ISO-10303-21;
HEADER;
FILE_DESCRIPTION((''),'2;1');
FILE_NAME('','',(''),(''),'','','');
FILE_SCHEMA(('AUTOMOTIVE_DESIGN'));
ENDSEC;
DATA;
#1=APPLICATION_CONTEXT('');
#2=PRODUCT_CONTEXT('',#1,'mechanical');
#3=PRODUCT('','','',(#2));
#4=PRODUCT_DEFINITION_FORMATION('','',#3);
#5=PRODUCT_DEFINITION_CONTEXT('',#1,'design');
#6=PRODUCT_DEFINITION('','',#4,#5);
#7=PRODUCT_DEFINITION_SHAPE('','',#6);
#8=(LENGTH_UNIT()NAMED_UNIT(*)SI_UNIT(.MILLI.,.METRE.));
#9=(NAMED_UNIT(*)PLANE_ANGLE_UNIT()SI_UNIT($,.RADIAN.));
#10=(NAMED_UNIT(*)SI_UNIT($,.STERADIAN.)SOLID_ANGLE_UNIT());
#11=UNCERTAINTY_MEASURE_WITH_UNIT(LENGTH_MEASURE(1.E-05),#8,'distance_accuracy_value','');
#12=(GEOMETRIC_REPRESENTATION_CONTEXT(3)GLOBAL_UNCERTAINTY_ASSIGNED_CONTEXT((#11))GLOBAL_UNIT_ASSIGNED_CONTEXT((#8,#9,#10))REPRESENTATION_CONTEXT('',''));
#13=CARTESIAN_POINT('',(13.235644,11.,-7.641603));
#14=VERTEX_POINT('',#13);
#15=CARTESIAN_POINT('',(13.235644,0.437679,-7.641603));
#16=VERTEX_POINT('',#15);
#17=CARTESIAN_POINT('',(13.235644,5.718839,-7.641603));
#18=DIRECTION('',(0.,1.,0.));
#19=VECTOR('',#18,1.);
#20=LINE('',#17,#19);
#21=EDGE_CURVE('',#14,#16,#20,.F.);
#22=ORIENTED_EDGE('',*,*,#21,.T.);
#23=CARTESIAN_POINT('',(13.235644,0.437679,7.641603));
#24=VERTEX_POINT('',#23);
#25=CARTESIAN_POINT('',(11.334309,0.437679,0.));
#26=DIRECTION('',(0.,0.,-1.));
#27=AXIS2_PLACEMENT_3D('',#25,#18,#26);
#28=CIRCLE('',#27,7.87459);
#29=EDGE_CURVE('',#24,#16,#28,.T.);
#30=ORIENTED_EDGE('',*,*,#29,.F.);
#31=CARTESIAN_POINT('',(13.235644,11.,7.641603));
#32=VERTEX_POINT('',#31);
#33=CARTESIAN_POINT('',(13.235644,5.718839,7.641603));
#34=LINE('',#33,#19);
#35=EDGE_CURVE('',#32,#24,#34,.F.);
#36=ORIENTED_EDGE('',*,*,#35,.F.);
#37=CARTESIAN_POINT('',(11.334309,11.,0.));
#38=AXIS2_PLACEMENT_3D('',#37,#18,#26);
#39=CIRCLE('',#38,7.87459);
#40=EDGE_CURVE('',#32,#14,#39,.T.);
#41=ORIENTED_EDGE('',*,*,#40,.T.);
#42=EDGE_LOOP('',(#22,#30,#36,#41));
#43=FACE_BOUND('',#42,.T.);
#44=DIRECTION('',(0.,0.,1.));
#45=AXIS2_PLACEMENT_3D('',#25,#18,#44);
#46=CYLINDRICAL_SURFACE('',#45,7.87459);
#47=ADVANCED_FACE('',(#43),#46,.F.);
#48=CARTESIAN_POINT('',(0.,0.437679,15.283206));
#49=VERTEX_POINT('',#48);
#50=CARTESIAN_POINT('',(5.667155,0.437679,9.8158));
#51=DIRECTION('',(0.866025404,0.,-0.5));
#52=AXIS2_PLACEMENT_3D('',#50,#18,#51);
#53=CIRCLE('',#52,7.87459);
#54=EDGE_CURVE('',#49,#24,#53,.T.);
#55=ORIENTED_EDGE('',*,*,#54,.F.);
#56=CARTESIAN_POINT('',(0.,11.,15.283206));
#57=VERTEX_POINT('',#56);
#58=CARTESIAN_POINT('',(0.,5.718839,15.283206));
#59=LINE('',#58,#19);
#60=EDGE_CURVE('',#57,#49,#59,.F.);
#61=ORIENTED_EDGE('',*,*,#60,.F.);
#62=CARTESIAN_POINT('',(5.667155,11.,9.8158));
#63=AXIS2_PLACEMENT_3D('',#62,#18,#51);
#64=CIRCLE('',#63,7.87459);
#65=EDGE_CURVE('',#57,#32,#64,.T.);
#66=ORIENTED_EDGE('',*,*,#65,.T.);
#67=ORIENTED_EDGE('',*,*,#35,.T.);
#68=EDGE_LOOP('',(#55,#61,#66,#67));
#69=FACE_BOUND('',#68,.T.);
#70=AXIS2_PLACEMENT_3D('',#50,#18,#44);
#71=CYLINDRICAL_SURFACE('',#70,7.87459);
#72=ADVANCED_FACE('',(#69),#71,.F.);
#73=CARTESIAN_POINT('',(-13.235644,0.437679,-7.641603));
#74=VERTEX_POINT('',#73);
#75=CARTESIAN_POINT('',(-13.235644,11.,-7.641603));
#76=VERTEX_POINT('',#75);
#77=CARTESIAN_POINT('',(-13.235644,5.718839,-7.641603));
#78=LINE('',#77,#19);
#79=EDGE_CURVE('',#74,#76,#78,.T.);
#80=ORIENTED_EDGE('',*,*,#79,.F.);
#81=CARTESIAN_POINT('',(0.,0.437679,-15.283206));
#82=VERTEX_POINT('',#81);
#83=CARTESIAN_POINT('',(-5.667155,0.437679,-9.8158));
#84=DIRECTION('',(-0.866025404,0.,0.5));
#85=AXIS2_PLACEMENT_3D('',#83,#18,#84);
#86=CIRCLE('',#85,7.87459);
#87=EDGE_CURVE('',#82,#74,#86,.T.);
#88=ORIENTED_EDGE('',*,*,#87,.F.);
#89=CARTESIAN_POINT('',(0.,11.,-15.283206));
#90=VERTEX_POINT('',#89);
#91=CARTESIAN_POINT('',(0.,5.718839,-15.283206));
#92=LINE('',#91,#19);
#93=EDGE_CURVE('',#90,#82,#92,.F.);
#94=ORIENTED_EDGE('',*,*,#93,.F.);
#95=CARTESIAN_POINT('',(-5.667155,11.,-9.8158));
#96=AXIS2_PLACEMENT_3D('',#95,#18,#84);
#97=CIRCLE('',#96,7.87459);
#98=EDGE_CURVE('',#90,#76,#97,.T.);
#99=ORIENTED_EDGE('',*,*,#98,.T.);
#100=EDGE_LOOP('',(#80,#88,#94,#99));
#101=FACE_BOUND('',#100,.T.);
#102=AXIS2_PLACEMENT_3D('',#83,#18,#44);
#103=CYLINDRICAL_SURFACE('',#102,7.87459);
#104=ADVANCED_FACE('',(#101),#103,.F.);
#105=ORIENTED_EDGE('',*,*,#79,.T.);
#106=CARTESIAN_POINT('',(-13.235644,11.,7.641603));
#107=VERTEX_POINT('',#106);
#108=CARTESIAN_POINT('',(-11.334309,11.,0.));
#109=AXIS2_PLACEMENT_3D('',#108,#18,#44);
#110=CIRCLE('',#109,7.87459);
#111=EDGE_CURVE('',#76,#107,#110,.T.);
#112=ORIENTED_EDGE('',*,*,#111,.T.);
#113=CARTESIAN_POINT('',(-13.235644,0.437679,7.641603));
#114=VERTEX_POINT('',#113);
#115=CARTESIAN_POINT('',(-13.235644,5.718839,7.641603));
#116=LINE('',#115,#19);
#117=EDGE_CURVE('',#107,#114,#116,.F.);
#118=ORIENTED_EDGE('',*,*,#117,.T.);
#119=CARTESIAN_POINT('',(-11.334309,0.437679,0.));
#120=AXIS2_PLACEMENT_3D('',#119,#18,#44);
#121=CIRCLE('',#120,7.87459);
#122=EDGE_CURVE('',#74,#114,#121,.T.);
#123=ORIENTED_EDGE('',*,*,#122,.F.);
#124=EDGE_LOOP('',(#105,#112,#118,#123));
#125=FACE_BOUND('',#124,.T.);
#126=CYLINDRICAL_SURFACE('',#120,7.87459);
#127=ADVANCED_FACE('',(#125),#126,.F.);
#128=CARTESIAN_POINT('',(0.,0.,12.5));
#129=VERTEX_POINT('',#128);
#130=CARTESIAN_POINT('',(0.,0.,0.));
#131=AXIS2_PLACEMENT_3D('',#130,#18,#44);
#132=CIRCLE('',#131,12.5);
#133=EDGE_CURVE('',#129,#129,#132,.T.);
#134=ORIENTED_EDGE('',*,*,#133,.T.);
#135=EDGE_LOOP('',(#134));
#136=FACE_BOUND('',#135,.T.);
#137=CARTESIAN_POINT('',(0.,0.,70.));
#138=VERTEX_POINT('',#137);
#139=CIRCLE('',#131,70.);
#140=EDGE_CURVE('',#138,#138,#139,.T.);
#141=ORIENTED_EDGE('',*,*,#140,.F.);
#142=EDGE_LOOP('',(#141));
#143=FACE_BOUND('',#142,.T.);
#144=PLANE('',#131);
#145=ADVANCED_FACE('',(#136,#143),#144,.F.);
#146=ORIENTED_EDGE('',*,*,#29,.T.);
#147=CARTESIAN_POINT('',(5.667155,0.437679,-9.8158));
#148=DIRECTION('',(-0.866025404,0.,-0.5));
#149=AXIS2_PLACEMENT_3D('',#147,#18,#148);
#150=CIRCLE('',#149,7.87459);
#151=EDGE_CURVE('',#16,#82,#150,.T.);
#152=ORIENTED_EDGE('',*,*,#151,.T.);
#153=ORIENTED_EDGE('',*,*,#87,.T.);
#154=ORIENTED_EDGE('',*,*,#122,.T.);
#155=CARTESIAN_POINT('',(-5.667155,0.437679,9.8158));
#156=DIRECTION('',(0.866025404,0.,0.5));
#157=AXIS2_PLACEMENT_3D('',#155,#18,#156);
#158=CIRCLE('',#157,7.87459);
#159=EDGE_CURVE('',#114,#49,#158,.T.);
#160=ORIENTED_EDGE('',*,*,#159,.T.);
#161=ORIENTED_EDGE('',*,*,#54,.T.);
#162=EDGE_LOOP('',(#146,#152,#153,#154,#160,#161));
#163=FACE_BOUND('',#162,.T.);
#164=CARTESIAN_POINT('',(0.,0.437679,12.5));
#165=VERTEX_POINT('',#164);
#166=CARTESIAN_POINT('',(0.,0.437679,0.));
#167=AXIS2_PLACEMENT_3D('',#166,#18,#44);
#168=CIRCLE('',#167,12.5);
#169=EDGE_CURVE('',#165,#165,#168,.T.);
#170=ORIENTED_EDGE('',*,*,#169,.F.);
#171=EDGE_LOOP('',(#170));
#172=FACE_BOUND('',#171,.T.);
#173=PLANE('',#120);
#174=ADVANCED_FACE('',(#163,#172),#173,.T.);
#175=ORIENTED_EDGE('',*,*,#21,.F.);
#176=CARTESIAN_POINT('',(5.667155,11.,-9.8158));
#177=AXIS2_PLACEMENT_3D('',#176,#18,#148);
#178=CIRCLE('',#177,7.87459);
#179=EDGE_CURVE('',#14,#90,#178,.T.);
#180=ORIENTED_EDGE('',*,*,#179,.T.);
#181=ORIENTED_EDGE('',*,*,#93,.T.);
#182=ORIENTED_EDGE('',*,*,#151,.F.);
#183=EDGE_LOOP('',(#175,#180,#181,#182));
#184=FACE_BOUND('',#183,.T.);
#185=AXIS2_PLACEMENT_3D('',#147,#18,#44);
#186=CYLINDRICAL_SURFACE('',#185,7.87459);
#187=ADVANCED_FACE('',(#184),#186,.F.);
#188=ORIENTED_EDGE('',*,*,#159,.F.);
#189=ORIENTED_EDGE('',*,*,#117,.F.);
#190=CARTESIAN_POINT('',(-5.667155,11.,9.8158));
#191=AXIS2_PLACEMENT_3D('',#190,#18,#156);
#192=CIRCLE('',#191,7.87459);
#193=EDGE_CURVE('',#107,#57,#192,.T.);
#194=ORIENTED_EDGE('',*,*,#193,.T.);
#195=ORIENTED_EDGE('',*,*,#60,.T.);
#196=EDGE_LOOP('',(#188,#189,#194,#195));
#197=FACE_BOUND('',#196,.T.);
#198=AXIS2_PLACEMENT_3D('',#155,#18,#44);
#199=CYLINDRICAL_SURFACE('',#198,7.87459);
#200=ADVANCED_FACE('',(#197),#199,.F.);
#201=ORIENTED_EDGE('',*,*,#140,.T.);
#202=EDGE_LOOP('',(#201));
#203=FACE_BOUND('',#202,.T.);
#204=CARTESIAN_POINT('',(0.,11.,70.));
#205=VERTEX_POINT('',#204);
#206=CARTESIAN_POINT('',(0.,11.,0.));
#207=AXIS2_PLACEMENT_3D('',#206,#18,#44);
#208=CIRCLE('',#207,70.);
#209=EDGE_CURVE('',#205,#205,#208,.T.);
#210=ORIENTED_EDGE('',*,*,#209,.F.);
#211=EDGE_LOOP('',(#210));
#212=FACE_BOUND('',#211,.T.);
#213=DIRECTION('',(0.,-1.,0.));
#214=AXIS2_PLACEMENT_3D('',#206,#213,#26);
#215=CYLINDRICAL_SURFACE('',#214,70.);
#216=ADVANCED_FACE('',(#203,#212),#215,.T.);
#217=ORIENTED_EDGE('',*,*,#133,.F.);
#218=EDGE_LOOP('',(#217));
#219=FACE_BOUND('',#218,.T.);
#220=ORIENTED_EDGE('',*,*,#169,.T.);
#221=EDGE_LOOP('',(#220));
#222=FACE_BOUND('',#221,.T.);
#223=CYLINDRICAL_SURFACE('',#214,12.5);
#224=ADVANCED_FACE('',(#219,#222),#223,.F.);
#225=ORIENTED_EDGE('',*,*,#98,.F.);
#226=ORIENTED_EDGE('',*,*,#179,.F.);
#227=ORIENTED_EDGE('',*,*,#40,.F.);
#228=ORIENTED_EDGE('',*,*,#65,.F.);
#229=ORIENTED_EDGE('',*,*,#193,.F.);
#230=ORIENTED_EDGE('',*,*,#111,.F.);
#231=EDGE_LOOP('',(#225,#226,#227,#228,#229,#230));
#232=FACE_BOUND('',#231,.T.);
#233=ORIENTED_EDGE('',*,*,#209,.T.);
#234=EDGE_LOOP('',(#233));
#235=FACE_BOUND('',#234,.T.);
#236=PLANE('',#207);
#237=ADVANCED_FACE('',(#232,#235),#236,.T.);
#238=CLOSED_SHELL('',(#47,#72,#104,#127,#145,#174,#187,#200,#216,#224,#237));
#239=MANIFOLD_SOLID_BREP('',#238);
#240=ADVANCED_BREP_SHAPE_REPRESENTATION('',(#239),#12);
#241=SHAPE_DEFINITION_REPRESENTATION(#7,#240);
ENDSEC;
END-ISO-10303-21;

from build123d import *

# Parameters (mm, degrees)
SKETCH1_R           = 70
BOSS_EXTRUDE1_DEPTH = 11
SKETCH2_R           = 12.5
CUT_EXTRUDE1_DEPTH  = 100.604216778
SKETCH3_R           = 7.874590161
CUT_EXTRUDE2_DEPTH  = 10.562321237
CIRPATTERN1_COUNT   = 6


with BuildPart() as part:
    # Sketch1 → Boss-Extrude1 (new body)
    with BuildSketch(Plane(origin=(0, 0, 0), x_dir=(1, 0, 0), z_dir=(0, 1, 0))):
        Circle(SKETCH1_R)
    extrude(amount=BOSS_EXTRUDE1_DEPTH)

    # Sketch2 → Cut-Extrude1 (cut, through all)
    with BuildSketch(Plane(origin=(0, 0, 0), x_dir=(1, 0, 0), z_dir=(0, 1, 0))):
        Circle(SKETCH2_R)
    extrude(amount=CUT_EXTRUDE1_DEPTH, mode=Mode.SUBTRACT)

    # Sketch3 → Cut-Extrude2 (cut)
    with BuildSketch(Plane(origin=(0, 11, 0), x_dir=(1, 0, 0), z_dir=(0, 1, 0))):
        with Locations((-11.334309292, 0)):
            Circle(SKETCH3_R)
    cut_extrude2 = extrude(amount=-CUT_EXTRUDE2_DEPTH, mode=Mode.SUBTRACT)

    # CirPattern1: Cut-Extrude2 ×6 about axis
    cirpattern1_axis = Axis((0, 0, 0), (0, 1, 0))
    for i in range(1, CIRPATTERN1_COUNT):
        add(cut_extrude2.rotate(cirpattern1_axis, i * 360 / CIRPATTERN1_COUNT), mode=Mode.SUBTRACT)


solid = part.part
